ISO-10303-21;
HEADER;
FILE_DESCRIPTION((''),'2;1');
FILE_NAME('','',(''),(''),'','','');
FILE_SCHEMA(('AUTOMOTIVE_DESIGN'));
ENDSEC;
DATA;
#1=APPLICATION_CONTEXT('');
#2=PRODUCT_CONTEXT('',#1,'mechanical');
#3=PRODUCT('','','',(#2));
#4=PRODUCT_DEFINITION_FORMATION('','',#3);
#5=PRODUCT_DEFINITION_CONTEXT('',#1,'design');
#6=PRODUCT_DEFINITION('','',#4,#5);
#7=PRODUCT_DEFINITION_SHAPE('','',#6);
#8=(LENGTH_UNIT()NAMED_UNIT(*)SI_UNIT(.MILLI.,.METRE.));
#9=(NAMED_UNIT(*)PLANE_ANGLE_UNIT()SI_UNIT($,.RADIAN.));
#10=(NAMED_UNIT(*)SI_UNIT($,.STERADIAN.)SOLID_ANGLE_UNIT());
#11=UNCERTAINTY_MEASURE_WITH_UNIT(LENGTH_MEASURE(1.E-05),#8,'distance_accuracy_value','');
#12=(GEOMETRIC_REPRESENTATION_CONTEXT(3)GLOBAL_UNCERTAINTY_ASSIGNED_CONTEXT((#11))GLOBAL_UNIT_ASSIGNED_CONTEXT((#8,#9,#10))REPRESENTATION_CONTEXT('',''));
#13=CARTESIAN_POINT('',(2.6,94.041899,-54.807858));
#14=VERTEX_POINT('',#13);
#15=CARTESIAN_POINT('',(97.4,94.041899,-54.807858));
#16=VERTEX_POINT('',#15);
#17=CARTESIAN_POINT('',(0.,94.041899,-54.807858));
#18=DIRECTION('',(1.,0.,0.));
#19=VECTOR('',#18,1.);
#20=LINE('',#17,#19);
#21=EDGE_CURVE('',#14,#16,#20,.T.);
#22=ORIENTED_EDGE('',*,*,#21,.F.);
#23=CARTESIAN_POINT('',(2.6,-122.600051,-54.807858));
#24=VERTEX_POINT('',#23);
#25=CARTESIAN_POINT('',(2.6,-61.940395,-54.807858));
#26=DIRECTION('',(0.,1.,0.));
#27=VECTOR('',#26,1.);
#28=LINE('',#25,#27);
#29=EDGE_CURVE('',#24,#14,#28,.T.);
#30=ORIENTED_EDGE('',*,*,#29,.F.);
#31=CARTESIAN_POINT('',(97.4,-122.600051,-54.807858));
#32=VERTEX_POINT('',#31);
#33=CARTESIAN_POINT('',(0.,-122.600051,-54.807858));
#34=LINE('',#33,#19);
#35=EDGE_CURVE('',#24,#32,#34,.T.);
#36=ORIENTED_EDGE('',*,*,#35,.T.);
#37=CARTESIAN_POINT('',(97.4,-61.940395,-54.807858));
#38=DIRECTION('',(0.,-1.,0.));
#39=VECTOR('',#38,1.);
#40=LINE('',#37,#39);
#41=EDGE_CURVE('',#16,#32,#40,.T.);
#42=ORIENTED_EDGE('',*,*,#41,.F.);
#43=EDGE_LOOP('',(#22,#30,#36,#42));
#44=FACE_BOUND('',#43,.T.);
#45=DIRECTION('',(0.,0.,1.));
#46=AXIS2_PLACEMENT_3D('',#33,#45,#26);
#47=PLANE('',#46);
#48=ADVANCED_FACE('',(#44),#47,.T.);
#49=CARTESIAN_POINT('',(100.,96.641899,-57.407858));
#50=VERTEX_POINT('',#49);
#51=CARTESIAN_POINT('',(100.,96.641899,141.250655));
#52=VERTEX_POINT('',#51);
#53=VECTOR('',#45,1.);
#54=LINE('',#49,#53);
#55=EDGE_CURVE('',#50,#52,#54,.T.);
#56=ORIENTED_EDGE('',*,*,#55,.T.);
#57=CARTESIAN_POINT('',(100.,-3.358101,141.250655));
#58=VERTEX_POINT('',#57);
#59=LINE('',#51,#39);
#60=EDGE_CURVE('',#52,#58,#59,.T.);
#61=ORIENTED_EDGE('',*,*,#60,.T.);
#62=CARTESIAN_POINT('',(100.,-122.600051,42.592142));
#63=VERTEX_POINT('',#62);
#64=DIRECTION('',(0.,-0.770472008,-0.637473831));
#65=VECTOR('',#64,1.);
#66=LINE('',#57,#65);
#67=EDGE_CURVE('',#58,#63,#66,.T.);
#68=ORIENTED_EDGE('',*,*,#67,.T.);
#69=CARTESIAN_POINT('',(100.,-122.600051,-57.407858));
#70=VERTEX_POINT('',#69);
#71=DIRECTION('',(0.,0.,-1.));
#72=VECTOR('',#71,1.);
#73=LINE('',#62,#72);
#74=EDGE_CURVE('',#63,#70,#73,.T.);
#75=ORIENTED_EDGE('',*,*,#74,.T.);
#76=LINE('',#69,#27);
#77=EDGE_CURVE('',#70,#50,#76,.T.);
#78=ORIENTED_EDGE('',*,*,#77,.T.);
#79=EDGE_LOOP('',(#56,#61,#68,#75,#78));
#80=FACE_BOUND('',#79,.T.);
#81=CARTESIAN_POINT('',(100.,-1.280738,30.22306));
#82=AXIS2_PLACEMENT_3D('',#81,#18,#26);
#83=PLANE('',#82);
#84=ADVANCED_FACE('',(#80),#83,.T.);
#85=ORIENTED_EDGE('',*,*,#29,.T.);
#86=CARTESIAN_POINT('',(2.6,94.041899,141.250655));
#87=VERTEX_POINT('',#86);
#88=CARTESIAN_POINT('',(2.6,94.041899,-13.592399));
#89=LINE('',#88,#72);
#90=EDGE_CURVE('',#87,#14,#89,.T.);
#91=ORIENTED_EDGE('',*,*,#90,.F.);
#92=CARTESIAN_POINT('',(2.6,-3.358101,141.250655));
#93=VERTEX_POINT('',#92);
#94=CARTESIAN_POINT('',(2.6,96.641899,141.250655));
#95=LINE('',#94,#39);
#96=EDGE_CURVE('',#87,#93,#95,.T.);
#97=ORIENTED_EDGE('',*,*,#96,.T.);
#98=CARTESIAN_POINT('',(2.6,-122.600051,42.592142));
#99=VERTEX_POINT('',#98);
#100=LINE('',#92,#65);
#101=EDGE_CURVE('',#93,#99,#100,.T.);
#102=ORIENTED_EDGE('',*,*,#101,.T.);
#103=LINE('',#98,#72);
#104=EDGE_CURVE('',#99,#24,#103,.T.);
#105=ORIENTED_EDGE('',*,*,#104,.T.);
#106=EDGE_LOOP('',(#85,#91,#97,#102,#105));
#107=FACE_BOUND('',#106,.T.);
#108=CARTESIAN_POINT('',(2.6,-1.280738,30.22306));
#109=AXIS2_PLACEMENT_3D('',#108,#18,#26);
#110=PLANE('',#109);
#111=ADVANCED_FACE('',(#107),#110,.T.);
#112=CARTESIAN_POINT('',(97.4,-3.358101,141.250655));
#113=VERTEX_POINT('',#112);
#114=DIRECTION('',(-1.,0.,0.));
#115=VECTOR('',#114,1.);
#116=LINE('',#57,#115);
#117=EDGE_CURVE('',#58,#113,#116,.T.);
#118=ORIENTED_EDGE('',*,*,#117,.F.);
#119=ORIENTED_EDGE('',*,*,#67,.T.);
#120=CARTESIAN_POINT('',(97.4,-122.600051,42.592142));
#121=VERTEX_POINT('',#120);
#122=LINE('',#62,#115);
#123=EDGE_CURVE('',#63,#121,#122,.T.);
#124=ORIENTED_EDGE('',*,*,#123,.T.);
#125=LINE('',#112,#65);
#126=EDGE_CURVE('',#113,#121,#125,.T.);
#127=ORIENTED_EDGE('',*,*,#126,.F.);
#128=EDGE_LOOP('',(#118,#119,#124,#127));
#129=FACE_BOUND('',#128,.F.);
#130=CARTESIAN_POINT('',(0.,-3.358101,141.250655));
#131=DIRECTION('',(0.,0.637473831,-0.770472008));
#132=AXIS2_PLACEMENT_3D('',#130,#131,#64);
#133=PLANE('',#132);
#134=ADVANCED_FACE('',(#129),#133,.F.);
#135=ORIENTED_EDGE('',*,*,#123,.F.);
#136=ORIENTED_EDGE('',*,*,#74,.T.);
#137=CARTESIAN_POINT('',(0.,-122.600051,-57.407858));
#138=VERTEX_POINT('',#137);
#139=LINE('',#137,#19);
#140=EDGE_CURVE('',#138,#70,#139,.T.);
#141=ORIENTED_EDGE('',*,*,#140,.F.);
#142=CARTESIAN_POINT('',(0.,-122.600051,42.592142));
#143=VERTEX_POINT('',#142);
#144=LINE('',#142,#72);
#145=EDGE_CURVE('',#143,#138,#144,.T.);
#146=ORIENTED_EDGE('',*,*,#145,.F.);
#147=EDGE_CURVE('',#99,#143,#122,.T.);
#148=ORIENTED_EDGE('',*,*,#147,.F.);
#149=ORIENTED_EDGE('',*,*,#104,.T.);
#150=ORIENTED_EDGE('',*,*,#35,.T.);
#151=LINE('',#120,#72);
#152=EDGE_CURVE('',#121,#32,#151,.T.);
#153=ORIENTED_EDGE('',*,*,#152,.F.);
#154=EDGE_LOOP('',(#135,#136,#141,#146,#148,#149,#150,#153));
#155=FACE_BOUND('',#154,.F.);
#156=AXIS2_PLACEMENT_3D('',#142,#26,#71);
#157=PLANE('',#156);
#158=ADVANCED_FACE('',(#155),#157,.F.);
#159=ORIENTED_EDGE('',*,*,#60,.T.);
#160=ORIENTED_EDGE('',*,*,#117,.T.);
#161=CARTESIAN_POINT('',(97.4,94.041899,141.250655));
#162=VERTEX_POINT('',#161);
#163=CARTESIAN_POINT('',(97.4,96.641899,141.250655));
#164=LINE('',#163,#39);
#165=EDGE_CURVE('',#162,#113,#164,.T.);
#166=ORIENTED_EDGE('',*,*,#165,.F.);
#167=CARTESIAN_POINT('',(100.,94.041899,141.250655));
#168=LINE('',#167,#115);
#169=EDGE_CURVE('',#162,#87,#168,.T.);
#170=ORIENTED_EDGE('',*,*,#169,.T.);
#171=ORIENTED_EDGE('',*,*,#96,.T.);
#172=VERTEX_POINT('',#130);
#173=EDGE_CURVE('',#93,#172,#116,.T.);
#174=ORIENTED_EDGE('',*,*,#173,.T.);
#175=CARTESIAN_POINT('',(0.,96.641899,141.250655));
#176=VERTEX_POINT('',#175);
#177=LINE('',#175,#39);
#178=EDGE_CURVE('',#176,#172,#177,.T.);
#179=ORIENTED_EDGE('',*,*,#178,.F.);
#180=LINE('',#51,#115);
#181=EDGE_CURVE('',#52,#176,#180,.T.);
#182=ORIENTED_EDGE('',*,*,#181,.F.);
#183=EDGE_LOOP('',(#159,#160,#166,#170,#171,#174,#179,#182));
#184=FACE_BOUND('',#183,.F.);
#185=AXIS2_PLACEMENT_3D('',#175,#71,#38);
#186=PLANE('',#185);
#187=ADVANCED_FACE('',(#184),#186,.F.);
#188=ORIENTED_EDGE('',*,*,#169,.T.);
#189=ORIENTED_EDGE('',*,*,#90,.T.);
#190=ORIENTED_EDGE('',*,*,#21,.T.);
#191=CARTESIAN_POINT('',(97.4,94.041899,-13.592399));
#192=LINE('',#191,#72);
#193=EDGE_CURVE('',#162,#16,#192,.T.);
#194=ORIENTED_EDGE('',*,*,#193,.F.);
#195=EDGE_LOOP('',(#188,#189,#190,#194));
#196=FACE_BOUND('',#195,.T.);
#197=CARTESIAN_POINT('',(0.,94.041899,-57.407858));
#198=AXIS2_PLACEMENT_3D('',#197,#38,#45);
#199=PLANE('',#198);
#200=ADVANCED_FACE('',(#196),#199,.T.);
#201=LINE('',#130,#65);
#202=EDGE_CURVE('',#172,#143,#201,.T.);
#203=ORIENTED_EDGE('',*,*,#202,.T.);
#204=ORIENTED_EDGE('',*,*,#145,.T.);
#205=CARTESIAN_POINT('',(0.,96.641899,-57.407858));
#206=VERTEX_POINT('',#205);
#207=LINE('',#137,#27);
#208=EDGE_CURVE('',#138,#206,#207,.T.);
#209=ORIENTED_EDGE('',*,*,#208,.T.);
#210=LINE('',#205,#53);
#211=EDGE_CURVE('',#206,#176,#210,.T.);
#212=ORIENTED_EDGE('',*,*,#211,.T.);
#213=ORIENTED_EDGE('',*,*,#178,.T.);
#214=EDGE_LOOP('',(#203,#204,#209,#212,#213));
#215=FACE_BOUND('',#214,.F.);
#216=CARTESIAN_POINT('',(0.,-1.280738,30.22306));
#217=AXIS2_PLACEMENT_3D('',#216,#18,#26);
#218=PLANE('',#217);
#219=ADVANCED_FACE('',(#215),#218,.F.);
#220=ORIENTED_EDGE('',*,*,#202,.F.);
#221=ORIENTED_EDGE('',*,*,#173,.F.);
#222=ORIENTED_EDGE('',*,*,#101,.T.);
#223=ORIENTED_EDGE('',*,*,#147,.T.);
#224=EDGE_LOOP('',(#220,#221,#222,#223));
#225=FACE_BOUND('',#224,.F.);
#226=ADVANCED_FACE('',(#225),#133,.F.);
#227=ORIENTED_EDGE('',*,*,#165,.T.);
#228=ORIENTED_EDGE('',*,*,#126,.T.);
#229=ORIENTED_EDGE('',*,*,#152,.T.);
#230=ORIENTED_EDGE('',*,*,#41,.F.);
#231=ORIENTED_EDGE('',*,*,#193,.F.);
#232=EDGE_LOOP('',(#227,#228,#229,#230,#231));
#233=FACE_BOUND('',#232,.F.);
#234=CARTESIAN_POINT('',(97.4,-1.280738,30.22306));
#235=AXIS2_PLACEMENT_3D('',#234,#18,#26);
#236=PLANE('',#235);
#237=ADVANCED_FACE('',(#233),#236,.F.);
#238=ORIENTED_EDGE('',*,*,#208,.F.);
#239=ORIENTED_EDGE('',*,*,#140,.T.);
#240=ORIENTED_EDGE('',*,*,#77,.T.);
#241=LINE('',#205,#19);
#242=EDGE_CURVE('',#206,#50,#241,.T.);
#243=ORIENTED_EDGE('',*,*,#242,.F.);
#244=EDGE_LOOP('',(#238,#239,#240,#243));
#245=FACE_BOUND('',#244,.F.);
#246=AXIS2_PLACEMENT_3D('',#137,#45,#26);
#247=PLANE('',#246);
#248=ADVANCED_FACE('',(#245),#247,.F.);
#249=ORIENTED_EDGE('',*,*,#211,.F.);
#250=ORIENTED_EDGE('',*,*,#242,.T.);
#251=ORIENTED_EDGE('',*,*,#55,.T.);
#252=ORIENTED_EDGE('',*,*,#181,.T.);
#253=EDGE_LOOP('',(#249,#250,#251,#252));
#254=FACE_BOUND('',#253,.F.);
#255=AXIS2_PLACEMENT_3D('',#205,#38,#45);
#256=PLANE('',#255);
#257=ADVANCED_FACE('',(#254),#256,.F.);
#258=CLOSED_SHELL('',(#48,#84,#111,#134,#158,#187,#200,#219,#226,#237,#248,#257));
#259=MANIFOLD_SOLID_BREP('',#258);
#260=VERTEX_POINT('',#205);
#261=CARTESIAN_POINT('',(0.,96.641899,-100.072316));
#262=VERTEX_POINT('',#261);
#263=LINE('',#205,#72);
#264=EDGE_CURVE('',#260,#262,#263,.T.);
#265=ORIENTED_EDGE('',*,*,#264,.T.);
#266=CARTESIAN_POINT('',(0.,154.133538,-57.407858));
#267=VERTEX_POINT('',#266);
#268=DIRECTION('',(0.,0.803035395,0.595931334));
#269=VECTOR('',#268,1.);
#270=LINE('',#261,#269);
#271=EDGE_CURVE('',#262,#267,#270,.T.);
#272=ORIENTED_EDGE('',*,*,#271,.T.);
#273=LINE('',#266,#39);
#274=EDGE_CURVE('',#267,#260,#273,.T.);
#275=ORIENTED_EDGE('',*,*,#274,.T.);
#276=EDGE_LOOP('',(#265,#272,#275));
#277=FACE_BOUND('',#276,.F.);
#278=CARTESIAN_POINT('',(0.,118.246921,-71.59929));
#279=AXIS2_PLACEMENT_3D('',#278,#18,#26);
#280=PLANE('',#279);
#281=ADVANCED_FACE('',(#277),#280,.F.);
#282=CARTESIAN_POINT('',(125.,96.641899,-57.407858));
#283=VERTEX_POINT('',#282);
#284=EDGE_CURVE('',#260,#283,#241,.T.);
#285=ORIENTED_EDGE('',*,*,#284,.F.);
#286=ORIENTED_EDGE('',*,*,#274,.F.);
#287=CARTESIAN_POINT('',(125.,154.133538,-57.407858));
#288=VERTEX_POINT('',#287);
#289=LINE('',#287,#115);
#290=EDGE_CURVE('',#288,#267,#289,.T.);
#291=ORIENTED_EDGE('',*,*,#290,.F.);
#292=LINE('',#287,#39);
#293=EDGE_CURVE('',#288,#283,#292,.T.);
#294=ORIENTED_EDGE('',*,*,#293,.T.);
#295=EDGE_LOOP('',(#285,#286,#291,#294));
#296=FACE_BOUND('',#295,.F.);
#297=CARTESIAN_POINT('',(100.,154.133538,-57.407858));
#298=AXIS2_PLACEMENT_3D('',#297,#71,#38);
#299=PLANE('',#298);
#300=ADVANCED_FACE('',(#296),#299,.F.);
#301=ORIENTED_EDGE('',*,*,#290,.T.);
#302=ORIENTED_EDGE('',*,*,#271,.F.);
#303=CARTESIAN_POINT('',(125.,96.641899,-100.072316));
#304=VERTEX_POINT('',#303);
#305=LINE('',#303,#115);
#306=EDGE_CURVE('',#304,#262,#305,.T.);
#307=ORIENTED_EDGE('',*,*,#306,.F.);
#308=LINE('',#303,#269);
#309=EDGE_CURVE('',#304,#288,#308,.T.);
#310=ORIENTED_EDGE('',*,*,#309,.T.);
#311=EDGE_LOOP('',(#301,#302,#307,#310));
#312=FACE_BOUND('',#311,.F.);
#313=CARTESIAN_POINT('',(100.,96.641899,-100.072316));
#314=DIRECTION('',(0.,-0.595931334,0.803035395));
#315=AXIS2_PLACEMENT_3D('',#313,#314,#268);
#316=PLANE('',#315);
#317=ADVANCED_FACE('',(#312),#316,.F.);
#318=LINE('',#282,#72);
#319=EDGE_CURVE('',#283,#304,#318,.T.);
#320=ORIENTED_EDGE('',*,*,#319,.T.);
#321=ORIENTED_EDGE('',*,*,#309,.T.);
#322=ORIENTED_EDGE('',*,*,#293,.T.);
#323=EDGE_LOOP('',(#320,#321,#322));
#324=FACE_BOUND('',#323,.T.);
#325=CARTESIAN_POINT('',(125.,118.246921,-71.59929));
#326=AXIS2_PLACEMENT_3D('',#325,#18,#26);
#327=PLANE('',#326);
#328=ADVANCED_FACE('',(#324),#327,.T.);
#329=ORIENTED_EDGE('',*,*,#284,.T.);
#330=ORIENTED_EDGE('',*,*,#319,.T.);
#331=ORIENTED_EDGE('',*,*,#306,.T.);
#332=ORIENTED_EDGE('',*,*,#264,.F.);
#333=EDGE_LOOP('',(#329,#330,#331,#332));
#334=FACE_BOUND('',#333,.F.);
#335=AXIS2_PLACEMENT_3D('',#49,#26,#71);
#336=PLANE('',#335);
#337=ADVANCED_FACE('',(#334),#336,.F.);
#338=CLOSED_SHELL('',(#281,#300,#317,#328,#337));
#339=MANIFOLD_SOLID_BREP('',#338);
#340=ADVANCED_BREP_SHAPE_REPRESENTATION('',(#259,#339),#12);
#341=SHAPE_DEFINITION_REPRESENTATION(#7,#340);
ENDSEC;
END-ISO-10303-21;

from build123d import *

# Parameters (mm, degrees)
F1_DEPTH = 25
F2_DEPTH = 100
F3_DEPTH = 25
F4_T     = -2.6


with BuildPart() as f1:
    # F0 (on Right) → F1 (new body)
    with BuildSketch(Plane.YZ):
        Polygon((-122.6000512926, 42.5921416433), (-122.6000512926, -57.4078583567), (96.6418987055, -57.4078583567), (96.6418987055, 141.2506547058), (-3.3581012945, 141.2506547058), align=None)
    extrude(amount=F1_DEPTH)

    # F0 (on Right) → F2 (join)
    with BuildSketch(Plane.YZ):
        Polygon((-122.6000512926, 42.5921416433), (-122.6000512926, -57.4078583567), (96.6418987055, -57.4078583567), (96.6418987055, 141.2506547058), (-3.3581012945, 141.2506547058), align=None)
    extrude(amount=F2_DEPTH)

    # F4
    f4_openings = [f1.faces().sort_by_distance(p)[0] for p in [
        (50, 46.641899, 141.250655),
        (50, -62.979076, 91.921398),
        (50, -122.600051, -7.407858),
    ]]
    offset(amount=F4_T, openings=f4_openings)


with BuildPart() as f2:
    # F0 (on Right) → F2, piece 2 (new body)
    with BuildSketch(Plane.YZ):
        Polygon((154.1335378966, -57.4078583567), (96.6418987055, -57.4078583567), (96.6418987055, -100.0723155335), align=None)
    extrude(amount=F2_DEPTH)

    # F3 (add): a face of the model
    f3_faces = [f2.faces().sort_by_distance(p)[0] for p in [
        (100, 115.8057784359, -71.6293440823),
    ]]
    extrude(f3_faces, amount=F3_DEPTH)


solid = Compound([f1.part, f2.part])
